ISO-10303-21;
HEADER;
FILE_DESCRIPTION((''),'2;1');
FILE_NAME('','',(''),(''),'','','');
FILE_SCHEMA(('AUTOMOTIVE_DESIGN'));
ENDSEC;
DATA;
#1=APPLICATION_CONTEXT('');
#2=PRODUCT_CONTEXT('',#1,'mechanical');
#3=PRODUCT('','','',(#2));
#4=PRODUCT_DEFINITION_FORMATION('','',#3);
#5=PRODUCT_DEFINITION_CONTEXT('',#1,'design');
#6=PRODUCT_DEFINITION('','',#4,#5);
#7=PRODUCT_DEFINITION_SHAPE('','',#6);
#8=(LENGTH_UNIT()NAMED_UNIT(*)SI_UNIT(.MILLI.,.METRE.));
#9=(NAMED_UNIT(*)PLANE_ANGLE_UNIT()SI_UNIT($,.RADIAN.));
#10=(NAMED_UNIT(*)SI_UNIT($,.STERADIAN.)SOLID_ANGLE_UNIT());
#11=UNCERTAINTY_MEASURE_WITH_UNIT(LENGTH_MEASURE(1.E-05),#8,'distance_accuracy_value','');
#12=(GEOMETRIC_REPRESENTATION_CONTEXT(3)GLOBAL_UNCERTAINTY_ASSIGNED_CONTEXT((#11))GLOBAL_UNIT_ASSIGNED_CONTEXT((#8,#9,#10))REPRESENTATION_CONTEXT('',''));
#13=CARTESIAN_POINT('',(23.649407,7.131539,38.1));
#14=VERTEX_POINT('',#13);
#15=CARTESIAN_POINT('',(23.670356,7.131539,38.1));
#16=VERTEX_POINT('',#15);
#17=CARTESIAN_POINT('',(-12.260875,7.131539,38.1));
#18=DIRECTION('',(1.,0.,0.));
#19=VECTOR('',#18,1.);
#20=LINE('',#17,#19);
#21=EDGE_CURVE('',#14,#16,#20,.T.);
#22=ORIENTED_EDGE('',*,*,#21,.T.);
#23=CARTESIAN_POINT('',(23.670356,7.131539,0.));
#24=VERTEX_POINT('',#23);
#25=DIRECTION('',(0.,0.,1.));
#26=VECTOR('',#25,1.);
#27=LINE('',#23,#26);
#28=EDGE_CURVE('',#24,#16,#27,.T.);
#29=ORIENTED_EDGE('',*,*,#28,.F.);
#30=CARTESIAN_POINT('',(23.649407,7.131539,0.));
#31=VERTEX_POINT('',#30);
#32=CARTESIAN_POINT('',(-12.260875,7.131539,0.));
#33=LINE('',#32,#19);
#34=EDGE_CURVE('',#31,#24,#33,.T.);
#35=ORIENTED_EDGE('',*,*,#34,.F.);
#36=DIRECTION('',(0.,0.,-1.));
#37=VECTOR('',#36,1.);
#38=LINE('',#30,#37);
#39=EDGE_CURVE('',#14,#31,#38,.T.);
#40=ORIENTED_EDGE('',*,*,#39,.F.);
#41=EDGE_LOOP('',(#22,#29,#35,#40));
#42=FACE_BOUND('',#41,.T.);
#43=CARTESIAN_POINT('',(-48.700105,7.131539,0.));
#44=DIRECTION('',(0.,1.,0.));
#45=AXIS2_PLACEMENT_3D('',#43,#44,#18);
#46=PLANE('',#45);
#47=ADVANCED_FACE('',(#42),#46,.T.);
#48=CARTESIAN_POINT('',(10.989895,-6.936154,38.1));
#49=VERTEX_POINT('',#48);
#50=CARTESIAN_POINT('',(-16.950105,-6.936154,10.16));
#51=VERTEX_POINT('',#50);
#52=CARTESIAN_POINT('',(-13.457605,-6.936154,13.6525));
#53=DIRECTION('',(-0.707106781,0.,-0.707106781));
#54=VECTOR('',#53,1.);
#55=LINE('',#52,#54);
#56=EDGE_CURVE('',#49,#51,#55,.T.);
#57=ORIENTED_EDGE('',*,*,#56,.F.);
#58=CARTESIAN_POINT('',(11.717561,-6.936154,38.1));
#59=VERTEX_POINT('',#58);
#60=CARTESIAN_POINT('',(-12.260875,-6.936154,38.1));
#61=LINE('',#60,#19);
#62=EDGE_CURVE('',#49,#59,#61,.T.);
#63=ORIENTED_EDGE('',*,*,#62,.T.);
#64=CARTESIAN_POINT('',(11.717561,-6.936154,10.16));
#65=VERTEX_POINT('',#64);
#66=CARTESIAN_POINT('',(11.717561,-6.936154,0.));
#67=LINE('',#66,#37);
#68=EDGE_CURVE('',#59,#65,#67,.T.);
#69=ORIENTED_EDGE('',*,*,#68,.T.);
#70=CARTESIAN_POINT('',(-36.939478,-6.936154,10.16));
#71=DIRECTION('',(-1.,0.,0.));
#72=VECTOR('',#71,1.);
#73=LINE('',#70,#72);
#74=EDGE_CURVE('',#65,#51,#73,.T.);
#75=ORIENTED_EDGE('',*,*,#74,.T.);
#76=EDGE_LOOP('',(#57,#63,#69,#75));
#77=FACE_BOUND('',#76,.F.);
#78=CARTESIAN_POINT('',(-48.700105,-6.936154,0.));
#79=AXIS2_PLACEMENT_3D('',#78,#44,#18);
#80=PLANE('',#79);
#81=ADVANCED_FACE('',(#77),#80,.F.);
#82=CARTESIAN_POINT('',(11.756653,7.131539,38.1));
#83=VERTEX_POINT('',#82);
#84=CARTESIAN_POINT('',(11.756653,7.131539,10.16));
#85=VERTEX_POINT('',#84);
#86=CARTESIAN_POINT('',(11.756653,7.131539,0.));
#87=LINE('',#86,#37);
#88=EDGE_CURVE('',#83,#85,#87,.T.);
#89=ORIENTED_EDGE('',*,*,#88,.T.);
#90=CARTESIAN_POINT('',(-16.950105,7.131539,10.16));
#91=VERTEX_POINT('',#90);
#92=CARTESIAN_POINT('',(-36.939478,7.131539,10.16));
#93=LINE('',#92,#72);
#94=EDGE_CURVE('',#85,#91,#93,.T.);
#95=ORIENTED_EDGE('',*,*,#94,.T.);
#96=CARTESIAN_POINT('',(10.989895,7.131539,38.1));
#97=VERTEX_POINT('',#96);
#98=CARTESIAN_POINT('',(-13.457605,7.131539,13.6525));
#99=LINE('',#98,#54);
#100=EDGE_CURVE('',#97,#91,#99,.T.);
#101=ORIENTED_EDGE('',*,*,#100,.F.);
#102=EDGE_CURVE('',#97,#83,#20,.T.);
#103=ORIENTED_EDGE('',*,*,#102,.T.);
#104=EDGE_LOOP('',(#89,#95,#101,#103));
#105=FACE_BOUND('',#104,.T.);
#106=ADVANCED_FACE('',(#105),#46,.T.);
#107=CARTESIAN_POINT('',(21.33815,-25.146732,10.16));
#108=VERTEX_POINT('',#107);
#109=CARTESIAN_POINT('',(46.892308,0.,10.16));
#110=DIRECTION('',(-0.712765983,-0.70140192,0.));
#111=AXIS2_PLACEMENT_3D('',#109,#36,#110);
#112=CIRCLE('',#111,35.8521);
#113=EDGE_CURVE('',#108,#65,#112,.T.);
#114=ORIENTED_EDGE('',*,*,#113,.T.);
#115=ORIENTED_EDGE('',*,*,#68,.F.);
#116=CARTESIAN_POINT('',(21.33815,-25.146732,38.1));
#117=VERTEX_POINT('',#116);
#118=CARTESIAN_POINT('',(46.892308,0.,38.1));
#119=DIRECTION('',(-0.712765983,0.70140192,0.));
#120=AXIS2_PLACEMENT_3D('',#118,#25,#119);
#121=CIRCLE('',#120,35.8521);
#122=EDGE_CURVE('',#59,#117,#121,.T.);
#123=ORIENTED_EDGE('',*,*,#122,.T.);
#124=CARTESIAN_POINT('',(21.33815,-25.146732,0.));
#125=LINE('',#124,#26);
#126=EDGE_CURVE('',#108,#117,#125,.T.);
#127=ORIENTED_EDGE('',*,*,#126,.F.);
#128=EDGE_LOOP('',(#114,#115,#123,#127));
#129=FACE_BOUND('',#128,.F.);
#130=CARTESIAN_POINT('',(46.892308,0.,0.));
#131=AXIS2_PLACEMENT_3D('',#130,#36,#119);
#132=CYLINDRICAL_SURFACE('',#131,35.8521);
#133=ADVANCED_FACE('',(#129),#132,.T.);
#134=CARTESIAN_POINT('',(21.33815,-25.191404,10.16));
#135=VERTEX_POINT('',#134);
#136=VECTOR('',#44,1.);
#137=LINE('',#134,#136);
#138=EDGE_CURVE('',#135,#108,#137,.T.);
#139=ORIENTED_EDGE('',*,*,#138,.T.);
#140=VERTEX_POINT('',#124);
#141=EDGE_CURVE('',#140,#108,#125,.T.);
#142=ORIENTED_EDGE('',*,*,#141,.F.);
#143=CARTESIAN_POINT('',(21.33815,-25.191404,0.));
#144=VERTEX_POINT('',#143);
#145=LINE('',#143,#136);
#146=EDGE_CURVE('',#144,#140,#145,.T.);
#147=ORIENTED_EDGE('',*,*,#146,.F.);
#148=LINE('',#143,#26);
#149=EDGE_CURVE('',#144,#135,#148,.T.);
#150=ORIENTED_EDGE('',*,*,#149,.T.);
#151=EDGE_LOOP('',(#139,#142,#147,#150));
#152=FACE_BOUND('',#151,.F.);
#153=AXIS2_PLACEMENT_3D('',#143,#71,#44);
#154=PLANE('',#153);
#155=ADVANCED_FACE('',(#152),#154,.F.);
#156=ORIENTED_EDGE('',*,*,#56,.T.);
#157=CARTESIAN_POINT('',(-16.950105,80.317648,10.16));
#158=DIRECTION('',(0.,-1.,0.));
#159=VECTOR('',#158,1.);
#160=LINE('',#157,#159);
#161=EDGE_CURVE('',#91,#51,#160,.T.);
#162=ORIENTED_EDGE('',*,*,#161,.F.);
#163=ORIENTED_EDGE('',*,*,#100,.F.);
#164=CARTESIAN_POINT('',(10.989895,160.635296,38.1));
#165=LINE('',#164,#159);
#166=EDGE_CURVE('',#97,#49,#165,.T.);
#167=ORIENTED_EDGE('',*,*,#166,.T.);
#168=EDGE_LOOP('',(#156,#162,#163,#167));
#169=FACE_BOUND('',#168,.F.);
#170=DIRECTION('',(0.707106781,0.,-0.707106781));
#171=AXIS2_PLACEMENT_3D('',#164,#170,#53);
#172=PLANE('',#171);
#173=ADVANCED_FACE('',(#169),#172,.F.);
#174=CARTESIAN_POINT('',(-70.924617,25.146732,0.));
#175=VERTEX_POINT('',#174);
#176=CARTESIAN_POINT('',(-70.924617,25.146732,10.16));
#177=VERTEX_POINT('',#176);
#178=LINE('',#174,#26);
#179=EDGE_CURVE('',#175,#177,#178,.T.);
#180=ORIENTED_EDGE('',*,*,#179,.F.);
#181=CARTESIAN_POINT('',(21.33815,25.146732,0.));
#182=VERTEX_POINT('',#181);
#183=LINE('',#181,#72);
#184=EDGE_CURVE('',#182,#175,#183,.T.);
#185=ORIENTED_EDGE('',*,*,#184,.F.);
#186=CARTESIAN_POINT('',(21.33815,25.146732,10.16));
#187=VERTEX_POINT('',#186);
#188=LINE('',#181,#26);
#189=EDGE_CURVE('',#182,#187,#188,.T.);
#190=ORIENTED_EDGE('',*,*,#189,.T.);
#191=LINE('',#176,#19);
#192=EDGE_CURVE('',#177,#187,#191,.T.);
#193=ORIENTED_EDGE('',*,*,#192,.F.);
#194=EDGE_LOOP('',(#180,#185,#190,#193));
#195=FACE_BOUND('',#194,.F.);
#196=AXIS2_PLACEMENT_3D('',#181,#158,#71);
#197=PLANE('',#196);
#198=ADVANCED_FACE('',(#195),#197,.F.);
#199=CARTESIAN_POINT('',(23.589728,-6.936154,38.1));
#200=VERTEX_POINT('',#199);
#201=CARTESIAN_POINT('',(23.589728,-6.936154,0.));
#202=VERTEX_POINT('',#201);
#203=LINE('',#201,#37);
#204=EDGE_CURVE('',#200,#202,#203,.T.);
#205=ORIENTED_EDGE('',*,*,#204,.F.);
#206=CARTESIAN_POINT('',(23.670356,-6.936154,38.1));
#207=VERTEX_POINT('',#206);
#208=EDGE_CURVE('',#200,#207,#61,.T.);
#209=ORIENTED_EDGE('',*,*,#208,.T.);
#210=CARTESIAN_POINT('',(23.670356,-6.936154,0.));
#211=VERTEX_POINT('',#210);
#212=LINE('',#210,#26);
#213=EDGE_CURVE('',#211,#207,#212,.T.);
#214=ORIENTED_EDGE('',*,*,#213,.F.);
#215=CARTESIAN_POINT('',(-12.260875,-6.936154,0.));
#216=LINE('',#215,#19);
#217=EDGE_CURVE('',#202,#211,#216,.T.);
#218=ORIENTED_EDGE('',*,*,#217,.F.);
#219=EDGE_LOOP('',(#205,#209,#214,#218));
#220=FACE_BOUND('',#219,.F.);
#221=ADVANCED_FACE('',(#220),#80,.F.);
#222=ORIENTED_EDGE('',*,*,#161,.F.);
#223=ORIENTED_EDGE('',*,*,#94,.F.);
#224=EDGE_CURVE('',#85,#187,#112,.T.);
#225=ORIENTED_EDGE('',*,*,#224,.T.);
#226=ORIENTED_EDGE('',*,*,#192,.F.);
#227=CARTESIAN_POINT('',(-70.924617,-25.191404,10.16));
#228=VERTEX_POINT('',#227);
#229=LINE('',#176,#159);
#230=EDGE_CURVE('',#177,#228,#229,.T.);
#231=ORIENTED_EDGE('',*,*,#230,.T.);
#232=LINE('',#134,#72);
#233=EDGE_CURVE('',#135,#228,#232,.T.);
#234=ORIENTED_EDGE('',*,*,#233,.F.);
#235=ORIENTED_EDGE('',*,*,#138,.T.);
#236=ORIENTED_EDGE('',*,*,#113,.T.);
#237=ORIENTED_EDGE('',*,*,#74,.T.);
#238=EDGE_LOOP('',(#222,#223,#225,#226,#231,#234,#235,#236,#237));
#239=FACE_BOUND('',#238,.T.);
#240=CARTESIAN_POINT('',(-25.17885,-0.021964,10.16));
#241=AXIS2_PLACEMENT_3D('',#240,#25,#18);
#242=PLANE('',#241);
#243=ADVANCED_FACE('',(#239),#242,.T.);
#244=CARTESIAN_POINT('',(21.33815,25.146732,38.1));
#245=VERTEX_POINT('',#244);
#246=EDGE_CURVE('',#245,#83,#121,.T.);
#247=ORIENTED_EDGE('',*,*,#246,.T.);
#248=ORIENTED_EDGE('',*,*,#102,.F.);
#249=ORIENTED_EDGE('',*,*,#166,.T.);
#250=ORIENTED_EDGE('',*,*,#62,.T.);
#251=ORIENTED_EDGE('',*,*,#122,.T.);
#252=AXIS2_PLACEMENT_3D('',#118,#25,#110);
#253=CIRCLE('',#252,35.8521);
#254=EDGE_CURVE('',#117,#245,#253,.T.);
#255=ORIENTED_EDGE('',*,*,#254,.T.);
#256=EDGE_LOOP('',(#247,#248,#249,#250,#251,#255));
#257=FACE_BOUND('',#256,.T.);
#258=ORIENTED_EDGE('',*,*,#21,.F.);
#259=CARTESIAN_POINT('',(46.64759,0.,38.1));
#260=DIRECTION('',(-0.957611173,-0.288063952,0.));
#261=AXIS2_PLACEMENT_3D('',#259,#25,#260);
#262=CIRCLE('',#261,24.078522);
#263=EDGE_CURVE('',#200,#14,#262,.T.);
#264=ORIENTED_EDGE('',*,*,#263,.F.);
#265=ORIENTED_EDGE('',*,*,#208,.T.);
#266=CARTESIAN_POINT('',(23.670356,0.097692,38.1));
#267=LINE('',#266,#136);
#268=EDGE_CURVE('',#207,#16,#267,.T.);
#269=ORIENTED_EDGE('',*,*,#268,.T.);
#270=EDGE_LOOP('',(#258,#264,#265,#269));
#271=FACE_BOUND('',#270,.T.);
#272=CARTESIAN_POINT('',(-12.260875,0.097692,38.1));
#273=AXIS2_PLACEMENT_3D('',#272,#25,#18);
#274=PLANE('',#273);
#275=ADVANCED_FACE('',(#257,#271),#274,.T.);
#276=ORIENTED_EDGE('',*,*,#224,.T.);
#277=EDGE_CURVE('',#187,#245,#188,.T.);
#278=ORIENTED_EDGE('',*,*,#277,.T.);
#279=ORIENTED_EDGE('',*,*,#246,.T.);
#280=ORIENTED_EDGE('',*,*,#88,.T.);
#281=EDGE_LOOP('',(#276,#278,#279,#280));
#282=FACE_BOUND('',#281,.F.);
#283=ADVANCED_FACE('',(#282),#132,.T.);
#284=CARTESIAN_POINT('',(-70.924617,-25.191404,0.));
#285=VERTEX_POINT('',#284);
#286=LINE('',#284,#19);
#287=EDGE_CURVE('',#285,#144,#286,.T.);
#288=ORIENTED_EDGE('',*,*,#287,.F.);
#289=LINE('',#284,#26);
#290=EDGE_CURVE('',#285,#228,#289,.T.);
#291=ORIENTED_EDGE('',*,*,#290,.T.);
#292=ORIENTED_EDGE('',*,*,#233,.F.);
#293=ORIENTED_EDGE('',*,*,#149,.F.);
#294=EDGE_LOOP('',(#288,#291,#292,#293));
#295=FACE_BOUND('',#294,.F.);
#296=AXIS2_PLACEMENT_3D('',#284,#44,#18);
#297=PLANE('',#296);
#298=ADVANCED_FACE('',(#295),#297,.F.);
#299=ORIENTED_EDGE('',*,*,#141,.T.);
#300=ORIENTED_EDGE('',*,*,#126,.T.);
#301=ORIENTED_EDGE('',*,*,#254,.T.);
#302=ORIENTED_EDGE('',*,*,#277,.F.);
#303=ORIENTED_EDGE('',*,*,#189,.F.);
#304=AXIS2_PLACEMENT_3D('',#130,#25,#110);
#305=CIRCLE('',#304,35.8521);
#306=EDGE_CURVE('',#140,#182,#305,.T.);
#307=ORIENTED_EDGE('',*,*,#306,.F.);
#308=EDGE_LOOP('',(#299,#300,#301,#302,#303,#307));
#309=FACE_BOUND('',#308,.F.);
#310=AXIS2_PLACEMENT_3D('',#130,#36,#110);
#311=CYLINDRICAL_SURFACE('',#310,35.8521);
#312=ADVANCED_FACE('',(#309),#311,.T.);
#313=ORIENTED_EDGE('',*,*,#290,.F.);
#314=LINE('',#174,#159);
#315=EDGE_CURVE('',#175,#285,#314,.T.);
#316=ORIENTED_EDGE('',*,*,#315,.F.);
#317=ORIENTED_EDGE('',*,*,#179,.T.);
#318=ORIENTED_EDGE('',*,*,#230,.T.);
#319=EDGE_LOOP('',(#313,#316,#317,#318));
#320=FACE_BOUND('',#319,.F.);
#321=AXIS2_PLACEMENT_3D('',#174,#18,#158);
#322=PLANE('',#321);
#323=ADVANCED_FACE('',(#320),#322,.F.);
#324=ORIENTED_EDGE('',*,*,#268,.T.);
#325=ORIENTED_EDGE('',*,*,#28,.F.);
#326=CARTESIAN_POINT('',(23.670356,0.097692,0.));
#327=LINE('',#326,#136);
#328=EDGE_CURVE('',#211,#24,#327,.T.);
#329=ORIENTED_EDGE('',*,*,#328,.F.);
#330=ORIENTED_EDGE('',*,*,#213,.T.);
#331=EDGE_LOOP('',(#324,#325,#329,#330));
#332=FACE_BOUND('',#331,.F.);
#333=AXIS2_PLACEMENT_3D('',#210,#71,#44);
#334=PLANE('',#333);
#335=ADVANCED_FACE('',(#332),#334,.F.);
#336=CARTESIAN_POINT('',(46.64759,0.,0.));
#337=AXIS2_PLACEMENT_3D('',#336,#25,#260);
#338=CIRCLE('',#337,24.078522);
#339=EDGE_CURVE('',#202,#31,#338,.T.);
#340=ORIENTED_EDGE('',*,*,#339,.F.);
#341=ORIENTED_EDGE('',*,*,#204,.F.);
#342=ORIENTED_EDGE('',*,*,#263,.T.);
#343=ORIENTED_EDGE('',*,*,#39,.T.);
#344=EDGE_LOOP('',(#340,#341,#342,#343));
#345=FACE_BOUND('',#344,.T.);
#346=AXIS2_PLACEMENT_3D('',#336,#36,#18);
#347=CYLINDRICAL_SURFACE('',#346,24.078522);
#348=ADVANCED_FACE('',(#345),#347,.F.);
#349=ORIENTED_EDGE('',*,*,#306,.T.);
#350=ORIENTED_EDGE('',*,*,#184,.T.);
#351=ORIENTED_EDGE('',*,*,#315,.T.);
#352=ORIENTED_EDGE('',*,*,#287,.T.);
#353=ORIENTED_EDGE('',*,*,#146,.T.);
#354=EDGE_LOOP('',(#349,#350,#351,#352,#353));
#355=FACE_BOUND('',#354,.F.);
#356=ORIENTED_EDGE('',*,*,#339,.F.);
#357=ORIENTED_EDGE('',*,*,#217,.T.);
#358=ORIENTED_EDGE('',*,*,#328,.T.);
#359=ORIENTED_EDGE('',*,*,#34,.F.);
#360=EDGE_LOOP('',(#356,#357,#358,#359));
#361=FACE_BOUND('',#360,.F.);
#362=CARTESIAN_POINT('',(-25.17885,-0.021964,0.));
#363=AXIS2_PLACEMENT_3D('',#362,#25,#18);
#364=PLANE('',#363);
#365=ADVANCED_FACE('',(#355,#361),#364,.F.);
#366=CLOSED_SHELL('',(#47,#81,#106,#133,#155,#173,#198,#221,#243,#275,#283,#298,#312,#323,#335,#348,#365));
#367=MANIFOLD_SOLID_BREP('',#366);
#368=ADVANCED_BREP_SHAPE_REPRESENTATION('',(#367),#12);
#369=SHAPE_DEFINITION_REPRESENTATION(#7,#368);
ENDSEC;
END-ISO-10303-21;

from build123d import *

# Parameters (mm, degrees)
F1_R        = 24.0785224066
F2_DEPTH    = 38.1
F3_DEPTH    = 10.16
F4_W        = 72.8784613311
F4_H        = 14.0676931478
F5_DEPTH    = 38.1
F6_DEPTH    = 0.508
F7_T4_DEPTH = 321.0752082512


# Not quite as in the source:
# - a fillet or chamfer that OpenCascade refuses, or shapes differently, is made with other operations: its cross-section is extruded or revolved along the edge and cut away or added


with BuildPart() as f2:
    # F1 (on face) → F2 (new body)
    with BuildSketch(Plane.XY):
        with BuildLine():
            ThreePointArc((21.3381504126, 25.1467317917), (11.0402076987, 0), (21.3381504126, -25.1467317917))
            ThreePointArc((21.3381504126, -25.1467317917), (60.4791188031, -33.1778787511), (82.7444076987, 0))
            ThreePointArc((82.7444076987, 0), (60.4791188031, 33.1778787511), (21.3381504126, 25.1467317917))
        make_face()
        with Locations((46.6475896537, 0)):
            Circle(F1_R, mode=Mode.SUBTRACT)
    extrude(amount=F2_DEPTH)

    # F0 (on Top) → F3 (join)
    with BuildSketch(Plane.XY):
        with BuildLine():
            ThreePointArc((21.3381504126, -25.1467317917), (11.0402076987, 0), (21.3381504126, 25.1467317917))
            Line((21.3381504126, 25.1467317917), (-70.9246173501, 25.1467317917))
            Line((-70.9246173501, 25.1467317917), (-70.9246173501, -25.1914039254))
            Line((-70.9246173501, -25.1914039254), (21.3381504126, -25.1914039254))
            Line((21.3381504126, -25.1914039254), (21.3381504126, -25.1467317917))
        make_face()
    extrude(amount=F3_DEPTH)

    # F4 (on Top) → F5 (join)
    with BuildSketch(Plane.XY):
        with Locations((-12.2608747333, 0.0976922456)):
            Rectangle(F4_W, F4_H)
    extrude(amount=F5_DEPTH)

    # F6 (cut): a face of the model
    f6_faces = [f2.faces().sort_by_distance(p)[0] for p in [
        (24.1783559322, 0.0976922456, 19.05),
    ]]
    extrude(f6_faces, amount=-F6_DEPTH, mode=Mode.SUBTRACT)

    # F7: chamfer of 59.69 on 1 edges, made by hand


with BuildPart() as f7_tool2:
    # F7_s3 → F7_t4 (new body)
    with BuildSketch(Plane.XZ.offset(-160.6352963712)):
        Polygon((10.9898946011, 38.1), (-48.7001053989, -21.59), (-48.7001053989, 38.1), align=None)
    extrude(amount=F7_T4_DEPTH)

    split(bisect_by=Plane.XY.offset(10.16), keep=Keep.TOP)


with BuildPart() as f2_1:
    add(f2.part)

    # F7_t1: cut F7_tool2
    add(f7_tool2.part, mode=Mode.SUBTRACT)


solid = f2_1.part
